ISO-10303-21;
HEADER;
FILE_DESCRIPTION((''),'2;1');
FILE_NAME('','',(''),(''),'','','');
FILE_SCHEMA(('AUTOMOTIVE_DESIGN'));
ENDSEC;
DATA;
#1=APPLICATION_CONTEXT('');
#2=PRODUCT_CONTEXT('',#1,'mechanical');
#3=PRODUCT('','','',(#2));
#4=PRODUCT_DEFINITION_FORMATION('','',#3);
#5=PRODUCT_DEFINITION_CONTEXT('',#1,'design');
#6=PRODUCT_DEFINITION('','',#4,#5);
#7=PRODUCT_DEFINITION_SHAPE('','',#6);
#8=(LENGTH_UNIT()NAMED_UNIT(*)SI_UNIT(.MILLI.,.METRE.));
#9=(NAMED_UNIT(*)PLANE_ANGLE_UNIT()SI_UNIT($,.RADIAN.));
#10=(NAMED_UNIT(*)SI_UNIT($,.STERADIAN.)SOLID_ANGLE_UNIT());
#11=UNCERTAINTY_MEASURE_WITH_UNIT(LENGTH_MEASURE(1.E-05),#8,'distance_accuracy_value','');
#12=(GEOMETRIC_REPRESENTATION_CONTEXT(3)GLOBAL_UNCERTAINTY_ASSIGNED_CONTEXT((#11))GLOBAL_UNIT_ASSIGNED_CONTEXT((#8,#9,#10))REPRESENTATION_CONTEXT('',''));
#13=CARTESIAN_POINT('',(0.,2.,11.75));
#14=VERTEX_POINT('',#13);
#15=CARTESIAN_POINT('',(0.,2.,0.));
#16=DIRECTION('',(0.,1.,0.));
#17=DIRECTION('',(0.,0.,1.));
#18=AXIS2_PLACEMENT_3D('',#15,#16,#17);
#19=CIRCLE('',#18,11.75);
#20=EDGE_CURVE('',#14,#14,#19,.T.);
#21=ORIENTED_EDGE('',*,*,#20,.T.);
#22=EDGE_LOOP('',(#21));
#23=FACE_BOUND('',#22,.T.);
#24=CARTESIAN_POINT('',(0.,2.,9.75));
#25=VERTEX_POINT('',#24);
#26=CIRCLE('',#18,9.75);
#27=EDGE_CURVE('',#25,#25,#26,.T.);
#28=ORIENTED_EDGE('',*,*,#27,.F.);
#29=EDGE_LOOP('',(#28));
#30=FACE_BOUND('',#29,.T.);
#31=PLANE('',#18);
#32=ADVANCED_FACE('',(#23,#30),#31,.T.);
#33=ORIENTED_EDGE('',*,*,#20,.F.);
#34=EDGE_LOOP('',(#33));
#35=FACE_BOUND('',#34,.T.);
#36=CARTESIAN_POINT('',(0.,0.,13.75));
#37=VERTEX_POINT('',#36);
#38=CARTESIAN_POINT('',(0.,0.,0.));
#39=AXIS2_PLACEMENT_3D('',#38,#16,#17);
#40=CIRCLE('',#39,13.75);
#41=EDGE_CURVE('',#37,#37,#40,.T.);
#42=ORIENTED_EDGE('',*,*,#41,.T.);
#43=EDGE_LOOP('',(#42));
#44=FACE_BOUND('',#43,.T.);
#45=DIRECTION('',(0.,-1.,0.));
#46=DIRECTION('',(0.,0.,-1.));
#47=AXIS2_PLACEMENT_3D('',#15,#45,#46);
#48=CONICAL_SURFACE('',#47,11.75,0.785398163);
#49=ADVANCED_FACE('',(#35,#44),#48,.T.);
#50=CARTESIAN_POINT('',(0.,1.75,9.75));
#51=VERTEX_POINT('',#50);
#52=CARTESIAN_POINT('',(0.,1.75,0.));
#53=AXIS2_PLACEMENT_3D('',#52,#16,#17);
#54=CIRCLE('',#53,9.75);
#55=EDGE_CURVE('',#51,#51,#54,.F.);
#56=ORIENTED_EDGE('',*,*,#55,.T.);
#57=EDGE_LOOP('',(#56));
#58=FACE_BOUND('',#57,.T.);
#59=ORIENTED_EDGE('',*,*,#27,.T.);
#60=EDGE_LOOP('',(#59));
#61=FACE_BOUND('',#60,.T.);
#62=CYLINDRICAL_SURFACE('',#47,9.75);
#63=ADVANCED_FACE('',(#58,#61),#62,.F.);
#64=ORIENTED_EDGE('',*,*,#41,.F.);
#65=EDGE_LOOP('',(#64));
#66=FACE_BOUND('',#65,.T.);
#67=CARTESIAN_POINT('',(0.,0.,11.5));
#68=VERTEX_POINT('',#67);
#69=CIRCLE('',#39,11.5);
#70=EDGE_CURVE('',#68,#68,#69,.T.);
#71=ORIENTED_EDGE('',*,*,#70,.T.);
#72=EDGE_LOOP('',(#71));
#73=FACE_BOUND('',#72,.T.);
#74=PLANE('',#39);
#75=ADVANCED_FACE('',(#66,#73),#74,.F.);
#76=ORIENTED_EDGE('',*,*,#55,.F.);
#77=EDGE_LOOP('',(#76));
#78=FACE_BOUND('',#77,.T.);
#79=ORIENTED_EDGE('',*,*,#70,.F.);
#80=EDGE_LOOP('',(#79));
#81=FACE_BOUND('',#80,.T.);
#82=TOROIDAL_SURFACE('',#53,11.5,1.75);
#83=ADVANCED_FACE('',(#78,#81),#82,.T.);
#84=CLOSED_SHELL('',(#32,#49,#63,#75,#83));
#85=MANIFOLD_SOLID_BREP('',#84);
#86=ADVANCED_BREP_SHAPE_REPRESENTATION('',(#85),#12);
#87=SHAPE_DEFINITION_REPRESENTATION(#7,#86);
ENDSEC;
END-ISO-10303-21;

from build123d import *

# Parameters (mm, degrees)
SKETCH1_R           = 13.75
SKETCH1_R_2         = 9.75
BOSS_EXTRUDE1_DEPTH = 2
CHAMFER1_SIZE       = 2
FILLET1_R           = 1.75


with BuildPart() as part:
    # Sketch1 → Boss-Extrude1 (new body)
    with BuildSketch(Plane(origin=(0, 0, 0), x_dir=(1, 0, 0), z_dir=(0, 1, 0))):
        with Locations(Location((0, 0, 0), (0, 0, 270))):
            Circle(SKETCH1_R)
        with Locations(Location((0, 0, 0), (0, 0, 270))):
            Circle(SKETCH1_R_2, mode=Mode.SUBTRACT)
    extrude(amount=BOSS_EXTRUDE1_DEPTH)

    # Chamfer1
    chamfer1_edges = [part.edges().sort_by_distance(p)[0] for p in [
        (0, 2, -13.75),
    ]]
    chamfer(chamfer1_edges, length=CHAMFER1_SIZE - 0.0001)  # a hair under: the kernel refuses the full size

    # Fillet1
    fillet1_edges = [part.edges().sort_by_distance(p)[0] for p in [
        (0, 0, -9.75),
    ]]
    fillet(fillet1_edges, radius=FILLET1_R)


solid = part.part
